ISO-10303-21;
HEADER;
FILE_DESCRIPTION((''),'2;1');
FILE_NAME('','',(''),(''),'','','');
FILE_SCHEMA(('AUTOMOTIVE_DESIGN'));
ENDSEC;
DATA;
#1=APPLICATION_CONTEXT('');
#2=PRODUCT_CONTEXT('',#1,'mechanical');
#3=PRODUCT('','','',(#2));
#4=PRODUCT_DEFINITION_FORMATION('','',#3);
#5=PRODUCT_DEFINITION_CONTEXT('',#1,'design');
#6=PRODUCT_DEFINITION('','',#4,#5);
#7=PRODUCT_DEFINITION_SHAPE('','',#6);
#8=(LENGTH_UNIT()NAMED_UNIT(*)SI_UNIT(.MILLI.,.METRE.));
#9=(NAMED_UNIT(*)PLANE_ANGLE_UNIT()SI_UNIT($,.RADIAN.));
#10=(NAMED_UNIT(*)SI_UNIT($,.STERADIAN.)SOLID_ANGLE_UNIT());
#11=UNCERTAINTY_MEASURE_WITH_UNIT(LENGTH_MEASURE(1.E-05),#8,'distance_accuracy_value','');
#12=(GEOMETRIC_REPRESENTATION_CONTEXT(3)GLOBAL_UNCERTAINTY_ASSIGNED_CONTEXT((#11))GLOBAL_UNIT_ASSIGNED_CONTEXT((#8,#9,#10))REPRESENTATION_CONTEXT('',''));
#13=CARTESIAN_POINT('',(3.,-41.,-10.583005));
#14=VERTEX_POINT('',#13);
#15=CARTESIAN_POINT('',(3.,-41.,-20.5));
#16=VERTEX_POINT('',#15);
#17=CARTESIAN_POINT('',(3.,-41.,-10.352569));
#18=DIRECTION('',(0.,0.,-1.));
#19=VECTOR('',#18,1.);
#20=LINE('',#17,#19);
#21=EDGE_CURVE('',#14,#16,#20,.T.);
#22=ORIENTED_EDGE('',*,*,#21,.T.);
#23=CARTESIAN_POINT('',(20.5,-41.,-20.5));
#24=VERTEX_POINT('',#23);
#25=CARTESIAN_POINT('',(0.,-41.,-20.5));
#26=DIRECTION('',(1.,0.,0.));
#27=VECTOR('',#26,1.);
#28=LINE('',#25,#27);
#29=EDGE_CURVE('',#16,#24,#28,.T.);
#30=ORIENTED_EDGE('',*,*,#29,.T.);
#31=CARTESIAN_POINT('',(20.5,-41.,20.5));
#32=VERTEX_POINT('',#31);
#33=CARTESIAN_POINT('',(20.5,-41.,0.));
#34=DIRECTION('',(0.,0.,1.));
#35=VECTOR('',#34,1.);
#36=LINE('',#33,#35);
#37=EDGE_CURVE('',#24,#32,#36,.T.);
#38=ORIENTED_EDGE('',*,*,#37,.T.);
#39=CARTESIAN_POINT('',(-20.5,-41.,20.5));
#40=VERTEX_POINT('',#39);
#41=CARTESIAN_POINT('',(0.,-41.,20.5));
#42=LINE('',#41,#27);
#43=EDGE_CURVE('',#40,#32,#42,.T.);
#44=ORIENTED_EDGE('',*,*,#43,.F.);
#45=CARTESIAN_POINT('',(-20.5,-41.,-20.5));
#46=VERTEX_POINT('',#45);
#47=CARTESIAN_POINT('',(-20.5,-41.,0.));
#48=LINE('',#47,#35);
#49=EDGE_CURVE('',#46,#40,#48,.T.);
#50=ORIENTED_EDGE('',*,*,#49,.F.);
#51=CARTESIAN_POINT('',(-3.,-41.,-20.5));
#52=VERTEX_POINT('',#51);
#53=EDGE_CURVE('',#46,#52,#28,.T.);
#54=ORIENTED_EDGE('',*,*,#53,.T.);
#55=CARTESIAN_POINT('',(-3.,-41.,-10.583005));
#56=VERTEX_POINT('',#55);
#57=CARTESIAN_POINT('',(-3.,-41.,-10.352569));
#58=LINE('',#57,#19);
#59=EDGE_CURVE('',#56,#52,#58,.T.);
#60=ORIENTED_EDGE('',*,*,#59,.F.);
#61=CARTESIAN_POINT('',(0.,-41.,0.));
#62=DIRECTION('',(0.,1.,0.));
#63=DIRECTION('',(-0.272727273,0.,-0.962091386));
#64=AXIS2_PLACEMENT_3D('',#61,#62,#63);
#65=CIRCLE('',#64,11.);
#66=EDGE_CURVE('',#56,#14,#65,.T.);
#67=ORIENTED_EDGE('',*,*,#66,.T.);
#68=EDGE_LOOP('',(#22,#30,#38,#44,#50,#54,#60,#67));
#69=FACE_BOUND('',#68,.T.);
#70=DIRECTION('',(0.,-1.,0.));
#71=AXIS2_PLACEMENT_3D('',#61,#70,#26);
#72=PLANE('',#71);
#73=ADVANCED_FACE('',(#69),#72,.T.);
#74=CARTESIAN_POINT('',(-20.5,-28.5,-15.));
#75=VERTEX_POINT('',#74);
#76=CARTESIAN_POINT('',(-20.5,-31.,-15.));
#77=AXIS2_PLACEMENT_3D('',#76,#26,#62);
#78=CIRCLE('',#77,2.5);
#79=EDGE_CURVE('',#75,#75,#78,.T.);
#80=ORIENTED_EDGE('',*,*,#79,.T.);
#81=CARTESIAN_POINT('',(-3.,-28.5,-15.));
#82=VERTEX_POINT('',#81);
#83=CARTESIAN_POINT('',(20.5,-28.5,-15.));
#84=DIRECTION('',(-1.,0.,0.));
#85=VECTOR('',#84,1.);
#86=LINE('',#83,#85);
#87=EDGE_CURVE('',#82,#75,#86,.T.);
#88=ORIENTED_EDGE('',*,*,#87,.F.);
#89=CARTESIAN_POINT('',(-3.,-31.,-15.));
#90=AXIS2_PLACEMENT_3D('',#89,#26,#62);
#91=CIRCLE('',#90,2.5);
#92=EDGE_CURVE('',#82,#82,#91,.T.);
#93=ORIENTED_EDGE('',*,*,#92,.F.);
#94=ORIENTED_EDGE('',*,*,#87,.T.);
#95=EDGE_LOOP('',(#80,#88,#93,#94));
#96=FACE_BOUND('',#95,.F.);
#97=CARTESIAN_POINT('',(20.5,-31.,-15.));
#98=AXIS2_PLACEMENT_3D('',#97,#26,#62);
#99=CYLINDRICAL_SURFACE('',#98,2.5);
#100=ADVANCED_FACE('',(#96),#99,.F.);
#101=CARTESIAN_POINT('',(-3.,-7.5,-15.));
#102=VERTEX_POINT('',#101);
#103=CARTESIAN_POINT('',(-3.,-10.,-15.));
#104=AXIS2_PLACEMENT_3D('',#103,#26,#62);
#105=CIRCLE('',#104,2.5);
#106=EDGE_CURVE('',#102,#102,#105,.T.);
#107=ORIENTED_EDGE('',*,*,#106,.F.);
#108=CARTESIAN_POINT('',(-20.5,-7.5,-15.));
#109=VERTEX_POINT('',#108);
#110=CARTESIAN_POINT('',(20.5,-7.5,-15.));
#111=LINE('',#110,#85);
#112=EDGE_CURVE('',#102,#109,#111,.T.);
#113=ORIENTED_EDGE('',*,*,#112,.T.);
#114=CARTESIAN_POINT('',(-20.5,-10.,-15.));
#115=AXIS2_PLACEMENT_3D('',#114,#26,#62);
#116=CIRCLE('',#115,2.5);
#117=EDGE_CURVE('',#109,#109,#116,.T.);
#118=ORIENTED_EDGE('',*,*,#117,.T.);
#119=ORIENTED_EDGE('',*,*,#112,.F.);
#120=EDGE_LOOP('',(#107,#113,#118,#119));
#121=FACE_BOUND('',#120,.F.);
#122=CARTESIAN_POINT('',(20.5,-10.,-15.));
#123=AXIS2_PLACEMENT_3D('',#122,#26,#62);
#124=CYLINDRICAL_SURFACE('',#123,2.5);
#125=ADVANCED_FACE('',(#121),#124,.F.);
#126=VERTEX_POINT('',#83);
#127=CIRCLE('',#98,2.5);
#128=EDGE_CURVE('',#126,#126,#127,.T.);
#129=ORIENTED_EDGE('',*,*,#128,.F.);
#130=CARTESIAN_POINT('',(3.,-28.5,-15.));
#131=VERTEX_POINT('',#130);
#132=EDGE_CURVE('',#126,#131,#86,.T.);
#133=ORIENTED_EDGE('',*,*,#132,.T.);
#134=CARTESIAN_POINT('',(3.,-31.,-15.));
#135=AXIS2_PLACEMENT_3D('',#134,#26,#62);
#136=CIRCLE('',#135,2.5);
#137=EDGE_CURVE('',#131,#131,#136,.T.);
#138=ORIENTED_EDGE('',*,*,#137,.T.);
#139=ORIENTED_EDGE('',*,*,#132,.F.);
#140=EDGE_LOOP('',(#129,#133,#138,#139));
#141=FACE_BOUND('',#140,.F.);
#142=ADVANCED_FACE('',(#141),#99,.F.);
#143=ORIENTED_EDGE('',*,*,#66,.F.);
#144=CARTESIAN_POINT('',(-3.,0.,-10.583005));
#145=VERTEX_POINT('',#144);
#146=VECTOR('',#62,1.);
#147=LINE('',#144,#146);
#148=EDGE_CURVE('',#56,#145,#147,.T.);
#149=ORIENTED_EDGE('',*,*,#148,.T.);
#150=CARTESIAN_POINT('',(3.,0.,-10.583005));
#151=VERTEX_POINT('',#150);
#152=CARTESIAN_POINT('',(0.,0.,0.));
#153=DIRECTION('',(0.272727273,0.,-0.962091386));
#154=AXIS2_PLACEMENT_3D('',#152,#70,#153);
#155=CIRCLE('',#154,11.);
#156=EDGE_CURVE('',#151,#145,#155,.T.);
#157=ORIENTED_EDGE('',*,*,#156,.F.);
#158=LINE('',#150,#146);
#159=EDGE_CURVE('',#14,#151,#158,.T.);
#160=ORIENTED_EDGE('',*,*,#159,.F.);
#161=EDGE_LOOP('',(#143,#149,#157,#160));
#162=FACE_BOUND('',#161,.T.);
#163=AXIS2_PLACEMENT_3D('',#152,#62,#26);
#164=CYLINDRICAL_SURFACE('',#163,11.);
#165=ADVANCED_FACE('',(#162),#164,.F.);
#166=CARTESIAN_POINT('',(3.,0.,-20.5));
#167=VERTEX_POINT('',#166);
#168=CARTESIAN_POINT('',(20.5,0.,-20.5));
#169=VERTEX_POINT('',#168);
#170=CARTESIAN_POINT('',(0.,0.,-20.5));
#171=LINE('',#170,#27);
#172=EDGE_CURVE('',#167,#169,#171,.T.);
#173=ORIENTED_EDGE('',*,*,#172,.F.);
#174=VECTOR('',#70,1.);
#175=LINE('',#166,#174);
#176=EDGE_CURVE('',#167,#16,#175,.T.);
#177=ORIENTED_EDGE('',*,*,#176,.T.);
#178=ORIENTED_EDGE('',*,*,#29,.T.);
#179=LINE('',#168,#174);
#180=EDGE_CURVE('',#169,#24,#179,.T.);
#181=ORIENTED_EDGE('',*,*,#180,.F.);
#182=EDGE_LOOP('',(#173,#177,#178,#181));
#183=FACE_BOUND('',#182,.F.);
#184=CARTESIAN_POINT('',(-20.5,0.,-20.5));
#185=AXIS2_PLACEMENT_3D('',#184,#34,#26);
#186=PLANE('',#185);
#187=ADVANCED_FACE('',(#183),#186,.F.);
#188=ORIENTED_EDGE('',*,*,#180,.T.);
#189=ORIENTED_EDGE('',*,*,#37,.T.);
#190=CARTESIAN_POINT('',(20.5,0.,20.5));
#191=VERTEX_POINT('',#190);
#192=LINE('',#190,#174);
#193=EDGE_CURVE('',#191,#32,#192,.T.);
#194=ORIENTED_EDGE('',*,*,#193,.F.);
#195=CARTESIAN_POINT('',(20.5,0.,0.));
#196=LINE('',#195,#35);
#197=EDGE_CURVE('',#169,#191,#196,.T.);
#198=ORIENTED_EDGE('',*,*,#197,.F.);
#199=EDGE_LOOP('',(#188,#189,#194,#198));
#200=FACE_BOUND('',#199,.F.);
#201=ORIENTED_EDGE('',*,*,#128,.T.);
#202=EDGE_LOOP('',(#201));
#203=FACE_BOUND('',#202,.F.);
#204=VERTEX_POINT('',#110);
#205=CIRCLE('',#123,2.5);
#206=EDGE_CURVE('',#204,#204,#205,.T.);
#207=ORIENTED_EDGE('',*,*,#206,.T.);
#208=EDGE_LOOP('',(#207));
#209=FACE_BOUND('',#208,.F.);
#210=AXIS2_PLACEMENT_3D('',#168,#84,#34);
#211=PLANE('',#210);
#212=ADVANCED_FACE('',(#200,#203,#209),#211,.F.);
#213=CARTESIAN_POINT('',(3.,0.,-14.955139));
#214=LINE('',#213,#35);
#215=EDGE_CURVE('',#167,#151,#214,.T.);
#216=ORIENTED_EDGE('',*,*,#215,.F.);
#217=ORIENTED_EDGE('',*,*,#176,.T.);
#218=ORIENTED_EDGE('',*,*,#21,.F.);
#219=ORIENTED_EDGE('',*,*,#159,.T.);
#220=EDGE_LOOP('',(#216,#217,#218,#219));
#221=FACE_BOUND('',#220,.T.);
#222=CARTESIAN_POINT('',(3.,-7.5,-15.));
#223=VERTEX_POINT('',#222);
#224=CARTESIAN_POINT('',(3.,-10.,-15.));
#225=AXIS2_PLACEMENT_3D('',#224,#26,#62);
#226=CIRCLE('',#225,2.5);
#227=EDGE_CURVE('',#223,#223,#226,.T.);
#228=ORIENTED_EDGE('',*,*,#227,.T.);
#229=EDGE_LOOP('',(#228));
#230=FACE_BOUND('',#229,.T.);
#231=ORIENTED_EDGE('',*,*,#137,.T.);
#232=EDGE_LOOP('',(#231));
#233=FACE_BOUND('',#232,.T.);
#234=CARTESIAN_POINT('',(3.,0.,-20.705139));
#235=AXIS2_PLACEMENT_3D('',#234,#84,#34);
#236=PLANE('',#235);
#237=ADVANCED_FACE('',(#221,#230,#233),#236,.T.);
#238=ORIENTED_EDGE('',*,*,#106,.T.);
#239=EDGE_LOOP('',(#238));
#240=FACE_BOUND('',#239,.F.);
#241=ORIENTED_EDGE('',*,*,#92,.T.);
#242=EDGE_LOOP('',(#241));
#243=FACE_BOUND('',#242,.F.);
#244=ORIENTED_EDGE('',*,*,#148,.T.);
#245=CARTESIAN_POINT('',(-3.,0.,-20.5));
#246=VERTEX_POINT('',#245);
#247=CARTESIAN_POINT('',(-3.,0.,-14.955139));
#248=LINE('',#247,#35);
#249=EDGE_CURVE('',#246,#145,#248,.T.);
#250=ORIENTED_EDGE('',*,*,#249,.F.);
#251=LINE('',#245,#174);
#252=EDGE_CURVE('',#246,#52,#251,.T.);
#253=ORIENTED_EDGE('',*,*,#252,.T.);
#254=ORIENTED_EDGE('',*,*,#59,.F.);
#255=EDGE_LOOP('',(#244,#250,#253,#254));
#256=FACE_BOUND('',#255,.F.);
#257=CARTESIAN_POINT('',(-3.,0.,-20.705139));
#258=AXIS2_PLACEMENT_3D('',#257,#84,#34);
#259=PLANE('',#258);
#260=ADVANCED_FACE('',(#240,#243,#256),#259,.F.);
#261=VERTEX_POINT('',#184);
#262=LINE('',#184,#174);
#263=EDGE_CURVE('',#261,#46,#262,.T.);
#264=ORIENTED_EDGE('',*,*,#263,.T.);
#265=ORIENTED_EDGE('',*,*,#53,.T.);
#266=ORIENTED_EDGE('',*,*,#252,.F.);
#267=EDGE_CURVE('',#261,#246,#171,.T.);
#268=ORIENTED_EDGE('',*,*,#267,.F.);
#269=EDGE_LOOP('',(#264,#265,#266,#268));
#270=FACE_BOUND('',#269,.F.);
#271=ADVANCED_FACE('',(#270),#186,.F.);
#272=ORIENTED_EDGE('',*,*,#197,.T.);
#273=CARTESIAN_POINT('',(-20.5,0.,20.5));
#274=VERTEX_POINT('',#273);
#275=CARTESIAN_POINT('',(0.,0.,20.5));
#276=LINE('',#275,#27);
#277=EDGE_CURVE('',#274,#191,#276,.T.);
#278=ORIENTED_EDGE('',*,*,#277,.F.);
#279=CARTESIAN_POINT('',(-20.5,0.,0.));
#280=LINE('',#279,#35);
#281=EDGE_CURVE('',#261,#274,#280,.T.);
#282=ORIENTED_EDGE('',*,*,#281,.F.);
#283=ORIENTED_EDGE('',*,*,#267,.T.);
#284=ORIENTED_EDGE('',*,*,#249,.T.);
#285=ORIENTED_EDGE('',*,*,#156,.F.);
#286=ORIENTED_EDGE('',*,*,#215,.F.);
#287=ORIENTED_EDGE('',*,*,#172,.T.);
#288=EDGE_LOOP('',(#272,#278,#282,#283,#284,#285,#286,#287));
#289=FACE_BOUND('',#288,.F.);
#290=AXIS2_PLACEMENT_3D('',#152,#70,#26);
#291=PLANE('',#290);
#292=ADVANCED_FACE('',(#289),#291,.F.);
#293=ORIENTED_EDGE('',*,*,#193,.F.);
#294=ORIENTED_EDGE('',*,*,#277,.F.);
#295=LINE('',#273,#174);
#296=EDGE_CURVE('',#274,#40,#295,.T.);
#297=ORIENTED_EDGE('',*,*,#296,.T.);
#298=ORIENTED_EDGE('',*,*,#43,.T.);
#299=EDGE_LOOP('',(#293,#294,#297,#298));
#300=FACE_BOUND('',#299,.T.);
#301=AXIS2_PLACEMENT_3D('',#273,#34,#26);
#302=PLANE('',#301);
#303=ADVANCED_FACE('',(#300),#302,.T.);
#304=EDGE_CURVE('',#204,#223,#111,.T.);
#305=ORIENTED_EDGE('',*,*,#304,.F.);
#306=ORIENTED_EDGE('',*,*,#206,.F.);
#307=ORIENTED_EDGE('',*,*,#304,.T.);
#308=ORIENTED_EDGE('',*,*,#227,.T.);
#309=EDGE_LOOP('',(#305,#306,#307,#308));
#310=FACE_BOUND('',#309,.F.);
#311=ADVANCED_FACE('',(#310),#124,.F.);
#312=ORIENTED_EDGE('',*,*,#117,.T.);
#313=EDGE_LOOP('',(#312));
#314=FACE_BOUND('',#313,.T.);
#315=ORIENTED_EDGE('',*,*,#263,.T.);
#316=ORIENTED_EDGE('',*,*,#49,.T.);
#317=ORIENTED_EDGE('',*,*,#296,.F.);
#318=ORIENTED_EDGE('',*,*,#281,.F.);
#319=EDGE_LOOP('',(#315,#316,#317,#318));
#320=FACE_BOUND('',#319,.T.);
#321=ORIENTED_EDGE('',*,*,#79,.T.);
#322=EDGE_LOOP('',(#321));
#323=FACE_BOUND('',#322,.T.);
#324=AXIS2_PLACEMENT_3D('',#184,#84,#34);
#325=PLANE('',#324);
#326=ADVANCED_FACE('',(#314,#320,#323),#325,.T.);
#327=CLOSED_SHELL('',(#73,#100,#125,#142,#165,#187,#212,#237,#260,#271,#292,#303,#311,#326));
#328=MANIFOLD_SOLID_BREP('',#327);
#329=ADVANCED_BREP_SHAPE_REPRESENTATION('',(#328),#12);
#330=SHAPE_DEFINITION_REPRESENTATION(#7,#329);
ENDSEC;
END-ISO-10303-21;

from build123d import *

# Parameters (mm, degrees)
F0_W     = 41
F0_H     = 41
F0_R     = 11
F1_DEPTH = 41
F2_W     = 6
F2_H     = 11.5
F3_DEPTH = 41.001
F4_R     = 2.5
F5_DEPTH = 41.001


# Not quite as in the source:
# - a feature names something its author has since deleted; it is built from what else it names


with BuildPart() as f1:
    # F0 (on Front) → F1 (new body)
    with BuildSketch(Plane.XZ):
        Rectangle(F0_W, F0_H)
        Circle(F0_R, mode=Mode.SUBTRACT)
    extrude(amount=F1_DEPTH)

    # F2 (on Front) → F3 (cut, through all)
    with BuildSketch(Plane.XZ):
        with Locations((0, -14.9551387876)):
            Rectangle(F2_W, F2_H)
    extrude(amount=F3_DEPTH, mode=Mode.SUBTRACT)

    # F4 (on face) → F5 (cut, through all)
    with BuildSketch(Plane.YZ.offset(20.5)):
        with Locations((-31, -15)):
            Circle(F4_R)
        with Locations((-10, -15)):
            Circle(F4_R)
    extrude(amount=-F5_DEPTH, mode=Mode.SUBTRACT)


solid = f1.part
